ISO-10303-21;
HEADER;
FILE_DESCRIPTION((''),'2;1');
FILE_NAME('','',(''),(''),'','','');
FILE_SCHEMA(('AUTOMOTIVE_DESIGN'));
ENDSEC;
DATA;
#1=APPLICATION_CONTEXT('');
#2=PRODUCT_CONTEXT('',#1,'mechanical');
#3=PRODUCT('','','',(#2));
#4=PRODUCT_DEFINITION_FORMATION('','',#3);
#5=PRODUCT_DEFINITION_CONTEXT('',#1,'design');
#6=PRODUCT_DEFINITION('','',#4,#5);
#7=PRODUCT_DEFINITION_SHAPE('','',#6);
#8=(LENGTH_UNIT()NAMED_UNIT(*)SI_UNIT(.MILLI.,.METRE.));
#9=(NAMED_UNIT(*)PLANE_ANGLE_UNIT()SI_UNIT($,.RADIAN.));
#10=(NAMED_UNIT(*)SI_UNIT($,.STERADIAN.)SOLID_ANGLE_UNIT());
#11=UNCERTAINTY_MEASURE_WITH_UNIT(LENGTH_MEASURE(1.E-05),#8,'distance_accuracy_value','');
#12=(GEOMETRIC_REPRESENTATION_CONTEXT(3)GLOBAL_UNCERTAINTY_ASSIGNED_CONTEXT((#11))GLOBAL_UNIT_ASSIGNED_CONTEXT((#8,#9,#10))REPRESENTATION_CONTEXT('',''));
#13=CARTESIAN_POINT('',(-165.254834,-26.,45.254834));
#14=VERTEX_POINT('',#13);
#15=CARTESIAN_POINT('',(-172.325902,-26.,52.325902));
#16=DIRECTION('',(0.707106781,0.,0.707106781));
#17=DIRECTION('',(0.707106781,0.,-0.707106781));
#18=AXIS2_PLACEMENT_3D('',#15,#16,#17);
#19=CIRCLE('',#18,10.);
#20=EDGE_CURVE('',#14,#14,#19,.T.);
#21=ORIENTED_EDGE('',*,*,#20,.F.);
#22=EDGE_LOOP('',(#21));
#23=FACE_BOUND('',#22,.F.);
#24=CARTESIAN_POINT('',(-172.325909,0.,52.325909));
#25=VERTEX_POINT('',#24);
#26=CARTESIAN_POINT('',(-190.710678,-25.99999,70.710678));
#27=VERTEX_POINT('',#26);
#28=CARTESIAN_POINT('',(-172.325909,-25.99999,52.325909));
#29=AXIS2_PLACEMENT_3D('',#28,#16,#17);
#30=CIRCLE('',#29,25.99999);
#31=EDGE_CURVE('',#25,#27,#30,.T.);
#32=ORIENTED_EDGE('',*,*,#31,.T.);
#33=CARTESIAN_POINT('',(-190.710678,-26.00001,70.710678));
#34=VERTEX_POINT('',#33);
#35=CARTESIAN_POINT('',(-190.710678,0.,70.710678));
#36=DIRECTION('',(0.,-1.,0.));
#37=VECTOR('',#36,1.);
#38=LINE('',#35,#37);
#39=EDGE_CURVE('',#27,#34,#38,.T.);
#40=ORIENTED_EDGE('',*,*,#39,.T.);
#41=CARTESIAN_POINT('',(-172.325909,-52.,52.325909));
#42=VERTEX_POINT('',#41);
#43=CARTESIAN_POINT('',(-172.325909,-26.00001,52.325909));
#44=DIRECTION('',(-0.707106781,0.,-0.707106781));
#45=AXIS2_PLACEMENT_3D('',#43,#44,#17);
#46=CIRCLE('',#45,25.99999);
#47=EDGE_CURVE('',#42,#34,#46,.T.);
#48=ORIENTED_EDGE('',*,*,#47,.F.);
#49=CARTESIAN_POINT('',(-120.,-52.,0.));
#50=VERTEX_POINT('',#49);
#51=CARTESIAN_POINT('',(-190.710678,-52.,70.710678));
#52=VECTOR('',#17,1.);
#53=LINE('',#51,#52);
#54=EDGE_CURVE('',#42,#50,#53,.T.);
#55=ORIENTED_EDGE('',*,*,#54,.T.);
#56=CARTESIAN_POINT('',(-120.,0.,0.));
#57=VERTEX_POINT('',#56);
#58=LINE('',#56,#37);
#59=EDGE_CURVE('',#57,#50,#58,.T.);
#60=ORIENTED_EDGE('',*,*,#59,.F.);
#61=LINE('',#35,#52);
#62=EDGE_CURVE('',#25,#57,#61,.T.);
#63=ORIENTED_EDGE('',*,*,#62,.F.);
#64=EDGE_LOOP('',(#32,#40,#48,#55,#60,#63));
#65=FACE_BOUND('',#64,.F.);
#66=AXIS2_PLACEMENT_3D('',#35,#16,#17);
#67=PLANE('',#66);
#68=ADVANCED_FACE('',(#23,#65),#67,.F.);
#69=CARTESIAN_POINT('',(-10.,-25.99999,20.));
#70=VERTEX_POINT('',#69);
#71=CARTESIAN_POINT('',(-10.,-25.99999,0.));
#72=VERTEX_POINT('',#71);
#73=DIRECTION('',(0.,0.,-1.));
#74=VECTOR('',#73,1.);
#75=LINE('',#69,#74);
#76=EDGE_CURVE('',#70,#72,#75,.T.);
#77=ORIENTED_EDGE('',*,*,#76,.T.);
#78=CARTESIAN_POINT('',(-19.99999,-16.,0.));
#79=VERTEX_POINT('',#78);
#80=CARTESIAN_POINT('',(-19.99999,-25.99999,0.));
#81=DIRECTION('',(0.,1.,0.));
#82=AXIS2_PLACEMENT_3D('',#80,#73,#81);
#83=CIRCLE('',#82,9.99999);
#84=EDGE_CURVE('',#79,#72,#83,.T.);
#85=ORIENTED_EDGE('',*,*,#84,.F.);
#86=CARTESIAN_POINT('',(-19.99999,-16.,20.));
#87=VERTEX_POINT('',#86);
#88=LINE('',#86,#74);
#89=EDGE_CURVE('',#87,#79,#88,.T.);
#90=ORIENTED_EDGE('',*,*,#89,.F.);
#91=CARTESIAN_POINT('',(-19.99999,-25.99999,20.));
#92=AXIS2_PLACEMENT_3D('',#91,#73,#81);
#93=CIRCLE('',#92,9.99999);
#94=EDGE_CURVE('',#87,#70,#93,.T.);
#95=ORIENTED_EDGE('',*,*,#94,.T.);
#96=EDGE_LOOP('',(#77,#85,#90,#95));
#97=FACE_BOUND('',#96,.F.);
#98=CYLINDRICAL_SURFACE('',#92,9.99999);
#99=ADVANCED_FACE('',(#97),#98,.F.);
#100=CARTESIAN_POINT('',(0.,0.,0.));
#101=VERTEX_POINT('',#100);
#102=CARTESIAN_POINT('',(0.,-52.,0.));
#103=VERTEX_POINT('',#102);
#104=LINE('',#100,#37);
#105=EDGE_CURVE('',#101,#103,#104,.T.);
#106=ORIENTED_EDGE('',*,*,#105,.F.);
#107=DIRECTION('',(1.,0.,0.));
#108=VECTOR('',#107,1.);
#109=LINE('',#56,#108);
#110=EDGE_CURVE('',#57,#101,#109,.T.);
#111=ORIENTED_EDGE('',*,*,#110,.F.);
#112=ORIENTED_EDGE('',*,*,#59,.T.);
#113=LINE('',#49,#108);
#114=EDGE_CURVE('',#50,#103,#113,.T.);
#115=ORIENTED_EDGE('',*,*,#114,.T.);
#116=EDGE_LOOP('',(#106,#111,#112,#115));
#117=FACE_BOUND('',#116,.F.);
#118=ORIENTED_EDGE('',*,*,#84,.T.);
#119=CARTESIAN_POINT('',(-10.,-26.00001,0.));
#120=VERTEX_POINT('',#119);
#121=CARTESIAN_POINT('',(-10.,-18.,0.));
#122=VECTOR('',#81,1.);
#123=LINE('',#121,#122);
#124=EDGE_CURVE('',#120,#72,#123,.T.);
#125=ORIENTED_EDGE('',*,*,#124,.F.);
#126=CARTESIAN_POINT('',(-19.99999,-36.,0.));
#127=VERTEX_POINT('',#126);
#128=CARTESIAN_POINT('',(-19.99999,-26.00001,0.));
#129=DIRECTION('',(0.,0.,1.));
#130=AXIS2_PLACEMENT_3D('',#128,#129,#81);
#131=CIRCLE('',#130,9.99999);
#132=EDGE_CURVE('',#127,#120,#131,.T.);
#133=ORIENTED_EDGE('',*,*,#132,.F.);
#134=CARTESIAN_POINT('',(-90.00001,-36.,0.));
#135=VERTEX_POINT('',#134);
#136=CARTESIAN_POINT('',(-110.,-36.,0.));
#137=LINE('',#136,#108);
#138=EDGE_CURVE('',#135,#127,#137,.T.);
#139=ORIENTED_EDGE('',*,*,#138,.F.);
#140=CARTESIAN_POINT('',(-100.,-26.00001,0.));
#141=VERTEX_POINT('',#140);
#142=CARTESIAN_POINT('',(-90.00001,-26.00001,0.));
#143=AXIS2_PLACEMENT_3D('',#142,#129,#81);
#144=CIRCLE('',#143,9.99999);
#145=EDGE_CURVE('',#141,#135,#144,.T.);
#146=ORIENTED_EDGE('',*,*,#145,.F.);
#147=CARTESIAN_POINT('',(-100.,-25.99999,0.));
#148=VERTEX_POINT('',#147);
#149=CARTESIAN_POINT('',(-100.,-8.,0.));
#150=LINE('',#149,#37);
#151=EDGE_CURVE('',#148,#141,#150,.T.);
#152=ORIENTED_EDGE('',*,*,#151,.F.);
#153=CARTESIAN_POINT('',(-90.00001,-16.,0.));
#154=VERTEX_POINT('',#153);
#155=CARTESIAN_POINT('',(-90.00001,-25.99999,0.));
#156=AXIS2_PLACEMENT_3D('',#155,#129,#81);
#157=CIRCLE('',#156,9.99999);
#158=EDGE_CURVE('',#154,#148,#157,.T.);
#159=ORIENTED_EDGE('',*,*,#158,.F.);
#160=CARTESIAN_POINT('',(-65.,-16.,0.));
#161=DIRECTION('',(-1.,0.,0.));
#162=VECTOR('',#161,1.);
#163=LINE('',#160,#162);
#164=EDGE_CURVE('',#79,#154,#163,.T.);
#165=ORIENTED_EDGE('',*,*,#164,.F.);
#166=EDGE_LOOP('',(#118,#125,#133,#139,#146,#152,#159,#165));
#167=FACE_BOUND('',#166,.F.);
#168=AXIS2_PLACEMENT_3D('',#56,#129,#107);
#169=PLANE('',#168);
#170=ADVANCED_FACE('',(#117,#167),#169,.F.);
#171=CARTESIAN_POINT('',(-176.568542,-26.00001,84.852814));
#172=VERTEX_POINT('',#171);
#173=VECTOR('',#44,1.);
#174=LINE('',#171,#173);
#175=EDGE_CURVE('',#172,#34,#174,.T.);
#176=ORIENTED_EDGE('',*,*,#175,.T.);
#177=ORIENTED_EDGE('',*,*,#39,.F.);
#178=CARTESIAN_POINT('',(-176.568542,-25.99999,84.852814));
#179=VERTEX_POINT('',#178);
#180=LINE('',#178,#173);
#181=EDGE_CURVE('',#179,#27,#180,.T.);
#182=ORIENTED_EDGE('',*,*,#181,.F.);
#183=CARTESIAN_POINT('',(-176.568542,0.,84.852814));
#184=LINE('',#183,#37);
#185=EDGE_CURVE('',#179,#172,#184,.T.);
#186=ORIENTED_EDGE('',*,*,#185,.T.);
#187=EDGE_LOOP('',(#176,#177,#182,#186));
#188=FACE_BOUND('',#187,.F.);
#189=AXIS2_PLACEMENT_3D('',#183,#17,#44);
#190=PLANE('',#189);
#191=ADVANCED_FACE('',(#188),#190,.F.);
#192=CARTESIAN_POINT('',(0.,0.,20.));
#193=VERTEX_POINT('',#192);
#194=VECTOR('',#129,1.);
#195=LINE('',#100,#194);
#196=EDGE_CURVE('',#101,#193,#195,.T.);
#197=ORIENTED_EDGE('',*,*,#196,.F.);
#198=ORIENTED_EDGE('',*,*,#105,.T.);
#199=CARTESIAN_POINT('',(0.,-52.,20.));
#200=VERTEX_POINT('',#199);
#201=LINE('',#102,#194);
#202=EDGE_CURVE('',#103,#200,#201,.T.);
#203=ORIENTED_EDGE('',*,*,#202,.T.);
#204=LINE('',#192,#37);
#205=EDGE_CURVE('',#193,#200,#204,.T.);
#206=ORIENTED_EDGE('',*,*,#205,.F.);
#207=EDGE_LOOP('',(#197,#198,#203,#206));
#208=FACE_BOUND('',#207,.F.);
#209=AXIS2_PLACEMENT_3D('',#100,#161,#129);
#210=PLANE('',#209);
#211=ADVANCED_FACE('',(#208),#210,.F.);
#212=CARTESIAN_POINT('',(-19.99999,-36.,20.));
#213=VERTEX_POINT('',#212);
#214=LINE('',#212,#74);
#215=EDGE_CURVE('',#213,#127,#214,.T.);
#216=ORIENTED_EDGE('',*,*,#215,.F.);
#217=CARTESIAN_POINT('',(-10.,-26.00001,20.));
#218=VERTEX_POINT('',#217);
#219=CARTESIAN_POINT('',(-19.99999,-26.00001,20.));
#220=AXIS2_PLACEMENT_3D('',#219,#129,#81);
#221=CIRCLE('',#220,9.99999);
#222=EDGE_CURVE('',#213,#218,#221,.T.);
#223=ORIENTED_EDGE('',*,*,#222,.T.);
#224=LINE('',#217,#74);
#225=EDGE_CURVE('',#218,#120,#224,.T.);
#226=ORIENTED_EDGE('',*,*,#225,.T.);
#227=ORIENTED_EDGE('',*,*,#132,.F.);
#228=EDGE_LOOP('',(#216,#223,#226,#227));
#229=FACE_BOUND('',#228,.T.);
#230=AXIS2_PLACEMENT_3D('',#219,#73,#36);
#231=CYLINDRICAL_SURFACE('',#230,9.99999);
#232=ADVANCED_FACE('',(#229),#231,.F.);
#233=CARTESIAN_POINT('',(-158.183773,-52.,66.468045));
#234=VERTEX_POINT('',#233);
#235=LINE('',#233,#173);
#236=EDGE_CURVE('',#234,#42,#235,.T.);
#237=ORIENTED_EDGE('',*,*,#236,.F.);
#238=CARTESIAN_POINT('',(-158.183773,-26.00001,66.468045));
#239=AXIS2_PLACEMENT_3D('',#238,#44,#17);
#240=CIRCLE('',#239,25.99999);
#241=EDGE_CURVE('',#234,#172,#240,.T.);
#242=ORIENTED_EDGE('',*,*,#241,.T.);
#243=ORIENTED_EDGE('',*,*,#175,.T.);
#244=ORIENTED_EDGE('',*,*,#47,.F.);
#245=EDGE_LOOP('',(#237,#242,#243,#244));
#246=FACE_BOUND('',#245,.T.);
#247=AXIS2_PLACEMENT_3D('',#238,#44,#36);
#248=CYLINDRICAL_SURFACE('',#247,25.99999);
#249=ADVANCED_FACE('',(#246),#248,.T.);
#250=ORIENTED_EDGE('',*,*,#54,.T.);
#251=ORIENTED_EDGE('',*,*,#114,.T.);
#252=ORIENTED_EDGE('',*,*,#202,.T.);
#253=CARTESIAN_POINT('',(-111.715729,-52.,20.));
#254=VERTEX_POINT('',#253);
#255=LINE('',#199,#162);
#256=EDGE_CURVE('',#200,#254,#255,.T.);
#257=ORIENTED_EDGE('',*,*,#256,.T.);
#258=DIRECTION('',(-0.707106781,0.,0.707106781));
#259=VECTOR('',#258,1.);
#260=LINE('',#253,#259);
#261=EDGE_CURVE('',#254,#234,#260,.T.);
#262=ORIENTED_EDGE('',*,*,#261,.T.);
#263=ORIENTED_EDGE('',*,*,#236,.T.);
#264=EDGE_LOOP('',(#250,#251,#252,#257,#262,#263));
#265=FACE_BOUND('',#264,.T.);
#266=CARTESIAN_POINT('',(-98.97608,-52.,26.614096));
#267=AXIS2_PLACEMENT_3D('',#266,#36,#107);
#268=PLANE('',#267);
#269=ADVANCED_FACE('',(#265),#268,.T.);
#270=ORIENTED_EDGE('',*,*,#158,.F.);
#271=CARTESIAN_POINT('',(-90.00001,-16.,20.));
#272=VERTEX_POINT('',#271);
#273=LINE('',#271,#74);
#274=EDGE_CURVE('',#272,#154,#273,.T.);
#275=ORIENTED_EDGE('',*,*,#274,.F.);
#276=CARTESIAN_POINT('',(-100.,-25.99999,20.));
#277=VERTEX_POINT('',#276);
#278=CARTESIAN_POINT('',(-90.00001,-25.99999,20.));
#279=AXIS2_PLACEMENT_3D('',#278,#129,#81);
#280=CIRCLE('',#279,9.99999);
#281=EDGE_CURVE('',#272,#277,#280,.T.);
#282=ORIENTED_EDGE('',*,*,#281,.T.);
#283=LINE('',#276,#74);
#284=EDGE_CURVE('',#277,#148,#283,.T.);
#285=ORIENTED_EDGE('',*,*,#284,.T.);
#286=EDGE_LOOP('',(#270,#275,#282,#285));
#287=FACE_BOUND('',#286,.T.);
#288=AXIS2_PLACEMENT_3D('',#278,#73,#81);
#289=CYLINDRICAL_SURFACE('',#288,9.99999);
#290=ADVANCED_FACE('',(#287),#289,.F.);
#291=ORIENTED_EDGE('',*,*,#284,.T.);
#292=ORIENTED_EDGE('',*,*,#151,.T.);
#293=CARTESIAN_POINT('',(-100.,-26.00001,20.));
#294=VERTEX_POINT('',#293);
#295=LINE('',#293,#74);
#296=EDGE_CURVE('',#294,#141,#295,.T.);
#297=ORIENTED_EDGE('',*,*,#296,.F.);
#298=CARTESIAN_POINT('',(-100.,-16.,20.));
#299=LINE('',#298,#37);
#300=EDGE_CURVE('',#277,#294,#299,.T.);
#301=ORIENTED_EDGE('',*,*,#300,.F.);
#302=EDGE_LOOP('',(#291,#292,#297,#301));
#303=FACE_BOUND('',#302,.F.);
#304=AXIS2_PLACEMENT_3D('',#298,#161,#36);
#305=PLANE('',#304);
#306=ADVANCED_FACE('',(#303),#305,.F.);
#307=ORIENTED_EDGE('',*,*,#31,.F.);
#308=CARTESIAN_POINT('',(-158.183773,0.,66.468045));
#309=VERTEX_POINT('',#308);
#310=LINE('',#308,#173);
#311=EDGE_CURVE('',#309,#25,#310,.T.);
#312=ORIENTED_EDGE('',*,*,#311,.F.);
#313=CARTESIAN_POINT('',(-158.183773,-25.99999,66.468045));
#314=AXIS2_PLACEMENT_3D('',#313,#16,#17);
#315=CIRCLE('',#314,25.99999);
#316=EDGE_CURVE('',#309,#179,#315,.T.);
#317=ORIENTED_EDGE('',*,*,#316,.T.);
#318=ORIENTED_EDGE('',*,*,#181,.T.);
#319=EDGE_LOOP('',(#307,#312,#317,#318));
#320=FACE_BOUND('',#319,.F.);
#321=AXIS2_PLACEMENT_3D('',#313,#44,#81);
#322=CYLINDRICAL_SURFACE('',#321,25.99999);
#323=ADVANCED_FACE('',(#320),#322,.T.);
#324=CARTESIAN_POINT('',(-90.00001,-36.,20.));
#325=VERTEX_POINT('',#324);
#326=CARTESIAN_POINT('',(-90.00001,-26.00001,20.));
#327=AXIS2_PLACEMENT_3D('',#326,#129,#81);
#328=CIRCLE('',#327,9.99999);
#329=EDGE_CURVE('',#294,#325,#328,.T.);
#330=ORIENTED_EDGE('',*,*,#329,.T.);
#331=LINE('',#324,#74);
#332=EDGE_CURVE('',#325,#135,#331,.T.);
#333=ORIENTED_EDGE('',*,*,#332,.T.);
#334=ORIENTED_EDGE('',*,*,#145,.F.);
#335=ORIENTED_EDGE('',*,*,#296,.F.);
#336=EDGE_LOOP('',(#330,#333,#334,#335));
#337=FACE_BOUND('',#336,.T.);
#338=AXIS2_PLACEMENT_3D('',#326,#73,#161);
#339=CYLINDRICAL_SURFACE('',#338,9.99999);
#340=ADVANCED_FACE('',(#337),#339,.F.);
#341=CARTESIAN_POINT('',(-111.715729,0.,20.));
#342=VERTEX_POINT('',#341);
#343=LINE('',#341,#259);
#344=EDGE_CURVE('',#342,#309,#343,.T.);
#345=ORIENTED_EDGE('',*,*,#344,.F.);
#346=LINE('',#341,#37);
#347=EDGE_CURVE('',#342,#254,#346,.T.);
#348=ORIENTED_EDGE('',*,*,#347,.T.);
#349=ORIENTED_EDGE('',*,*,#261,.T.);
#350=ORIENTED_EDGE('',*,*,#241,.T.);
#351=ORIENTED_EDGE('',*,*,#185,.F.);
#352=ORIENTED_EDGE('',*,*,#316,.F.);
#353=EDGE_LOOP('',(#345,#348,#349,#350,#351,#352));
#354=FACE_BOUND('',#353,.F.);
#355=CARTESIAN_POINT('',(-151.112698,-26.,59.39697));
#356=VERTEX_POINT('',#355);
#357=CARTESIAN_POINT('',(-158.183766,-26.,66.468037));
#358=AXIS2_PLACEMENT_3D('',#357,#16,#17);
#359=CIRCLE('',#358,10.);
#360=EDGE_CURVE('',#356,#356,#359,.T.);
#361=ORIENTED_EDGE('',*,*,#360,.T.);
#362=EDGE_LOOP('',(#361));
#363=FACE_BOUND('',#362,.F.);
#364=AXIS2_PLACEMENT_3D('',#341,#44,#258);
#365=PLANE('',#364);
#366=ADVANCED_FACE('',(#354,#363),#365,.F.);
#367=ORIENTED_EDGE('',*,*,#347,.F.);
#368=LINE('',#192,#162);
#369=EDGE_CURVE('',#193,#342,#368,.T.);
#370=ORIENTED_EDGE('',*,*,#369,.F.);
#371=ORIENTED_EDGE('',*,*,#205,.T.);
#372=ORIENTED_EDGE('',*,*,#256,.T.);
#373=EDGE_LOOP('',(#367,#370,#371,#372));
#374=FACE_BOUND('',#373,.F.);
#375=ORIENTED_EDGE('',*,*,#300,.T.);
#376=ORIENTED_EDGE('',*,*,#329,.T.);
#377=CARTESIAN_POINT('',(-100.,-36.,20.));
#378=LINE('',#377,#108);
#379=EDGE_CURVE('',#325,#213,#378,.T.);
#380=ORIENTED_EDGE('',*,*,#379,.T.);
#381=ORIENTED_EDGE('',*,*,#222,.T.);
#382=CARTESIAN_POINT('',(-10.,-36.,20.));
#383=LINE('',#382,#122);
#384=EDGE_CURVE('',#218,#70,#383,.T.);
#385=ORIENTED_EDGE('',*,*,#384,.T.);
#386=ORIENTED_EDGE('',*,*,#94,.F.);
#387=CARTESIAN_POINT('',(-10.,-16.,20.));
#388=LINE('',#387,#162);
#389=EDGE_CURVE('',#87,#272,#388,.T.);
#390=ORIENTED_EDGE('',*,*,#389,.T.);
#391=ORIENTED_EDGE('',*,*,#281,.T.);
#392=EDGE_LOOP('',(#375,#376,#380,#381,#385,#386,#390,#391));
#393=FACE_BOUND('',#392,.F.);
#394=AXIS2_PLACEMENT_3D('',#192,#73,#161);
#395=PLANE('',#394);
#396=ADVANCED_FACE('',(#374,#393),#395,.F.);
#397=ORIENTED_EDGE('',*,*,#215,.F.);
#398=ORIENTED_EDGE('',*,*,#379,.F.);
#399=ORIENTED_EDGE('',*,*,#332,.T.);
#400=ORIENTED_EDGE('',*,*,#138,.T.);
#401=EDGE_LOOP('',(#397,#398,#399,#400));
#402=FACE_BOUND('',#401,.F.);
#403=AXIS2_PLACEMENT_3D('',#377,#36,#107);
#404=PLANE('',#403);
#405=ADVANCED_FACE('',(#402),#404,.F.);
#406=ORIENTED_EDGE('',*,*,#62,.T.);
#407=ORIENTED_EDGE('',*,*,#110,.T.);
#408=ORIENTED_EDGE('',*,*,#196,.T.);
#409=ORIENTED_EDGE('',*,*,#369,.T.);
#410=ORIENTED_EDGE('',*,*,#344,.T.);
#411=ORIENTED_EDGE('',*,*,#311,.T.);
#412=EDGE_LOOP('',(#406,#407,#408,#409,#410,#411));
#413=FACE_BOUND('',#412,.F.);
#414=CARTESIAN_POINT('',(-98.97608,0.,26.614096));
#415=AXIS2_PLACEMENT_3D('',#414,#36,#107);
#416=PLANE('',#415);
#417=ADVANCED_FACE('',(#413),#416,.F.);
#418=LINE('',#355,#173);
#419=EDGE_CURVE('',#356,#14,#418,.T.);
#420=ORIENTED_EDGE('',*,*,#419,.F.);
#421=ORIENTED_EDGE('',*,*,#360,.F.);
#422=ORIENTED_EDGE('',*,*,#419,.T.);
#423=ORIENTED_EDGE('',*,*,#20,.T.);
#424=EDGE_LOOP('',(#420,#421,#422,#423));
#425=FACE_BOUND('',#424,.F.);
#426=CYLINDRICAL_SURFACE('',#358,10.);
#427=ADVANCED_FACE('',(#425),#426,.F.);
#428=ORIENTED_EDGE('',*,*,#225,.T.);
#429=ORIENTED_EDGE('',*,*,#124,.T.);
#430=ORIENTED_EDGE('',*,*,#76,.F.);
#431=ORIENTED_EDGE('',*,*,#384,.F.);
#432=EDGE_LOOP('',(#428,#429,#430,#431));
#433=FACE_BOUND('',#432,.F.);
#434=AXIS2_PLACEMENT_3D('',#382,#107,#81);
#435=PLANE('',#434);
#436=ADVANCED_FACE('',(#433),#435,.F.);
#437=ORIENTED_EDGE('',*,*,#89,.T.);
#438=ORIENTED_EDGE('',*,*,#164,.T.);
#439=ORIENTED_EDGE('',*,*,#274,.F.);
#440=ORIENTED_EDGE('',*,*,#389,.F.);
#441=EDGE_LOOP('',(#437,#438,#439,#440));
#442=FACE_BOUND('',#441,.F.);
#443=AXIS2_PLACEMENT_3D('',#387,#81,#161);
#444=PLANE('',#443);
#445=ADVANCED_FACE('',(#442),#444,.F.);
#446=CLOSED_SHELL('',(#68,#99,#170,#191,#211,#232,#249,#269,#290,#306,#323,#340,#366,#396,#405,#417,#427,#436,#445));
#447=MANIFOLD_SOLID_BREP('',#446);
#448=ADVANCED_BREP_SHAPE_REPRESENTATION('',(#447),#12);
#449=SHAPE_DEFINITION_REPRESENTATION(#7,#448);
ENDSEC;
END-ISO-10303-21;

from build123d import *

# Parameters (mm, degrees)
F1_DEPTH = 52
F2_R     = 10
F3_DEPTH = 25
F4_R     = 25.99999
F6_DEPTH = 25
F7_R     = 9.99999


# Not quite as in the source:
# - a fillet or chamfer is up to 0.001 mm smaller than in the source, because OpenCascade refuses the exact size
# - a feature names something its author has since deleted; it is built from what else it names


with BuildPart() as f1:
    # F0 (on Front) → F1 (new body)
    with BuildSketch(Plane.XZ):
        Polygon((-120, 0), (0, 0), (0, 20), (-111.7157287525, 20), (-176.5685424949, 84.8528137424), (-190.7106781187, 70.7106781187), align=None)
    extrude(amount=F1_DEPTH)

    # F2 (on face) → F3 (cut)
    with BuildSketch(Plane(origin=(-45.8578643763, 0, -45.8578643763), x_dir=(0.7071067812, 0, -0.7071067812), z_dir=(0.7071067812, 0, 0.7071067812))):
        with Locations((-158.8528137424, -26)):
            Circle(F2_R)
    extrude(amount=-F3_DEPTH, mode=Mode.SUBTRACT)

    # F4 (radius 26 in the source; OpenCascade refuses exactly that, so slightly less here)
    f4_edges = [f1.edges().sort_by_distance(p)[0] for p in [
        (-183.63961, 0, 77.781746),
        (-183.63961, -52, 77.781746),
    ]]
    fillet(f4_edges, radius=F4_R)

    # F5 (on face) → F6 (cut)
    with BuildSketch(Plane.XY.offset(20)):
        Polygon((-10, -16), (-100, -16), (-100, -26), (-100, -36), (-10, -36), (-10, -26), align=None)
    extrude(amount=-F6_DEPTH, mode=Mode.SUBTRACT)

    # F7 (radius 10 in the source; OpenCascade refuses exactly that, so slightly less here)
    f7_edges = [f1.edges().sort_by_distance(p)[0] for p in [
        (-10, -16, 10),
        (-10, -36, 10),
        (-100, -16, 10),
        (-100, -36, 10),
    ]]
    fillet(f7_edges, radius=F7_R)


solid = f1.part
